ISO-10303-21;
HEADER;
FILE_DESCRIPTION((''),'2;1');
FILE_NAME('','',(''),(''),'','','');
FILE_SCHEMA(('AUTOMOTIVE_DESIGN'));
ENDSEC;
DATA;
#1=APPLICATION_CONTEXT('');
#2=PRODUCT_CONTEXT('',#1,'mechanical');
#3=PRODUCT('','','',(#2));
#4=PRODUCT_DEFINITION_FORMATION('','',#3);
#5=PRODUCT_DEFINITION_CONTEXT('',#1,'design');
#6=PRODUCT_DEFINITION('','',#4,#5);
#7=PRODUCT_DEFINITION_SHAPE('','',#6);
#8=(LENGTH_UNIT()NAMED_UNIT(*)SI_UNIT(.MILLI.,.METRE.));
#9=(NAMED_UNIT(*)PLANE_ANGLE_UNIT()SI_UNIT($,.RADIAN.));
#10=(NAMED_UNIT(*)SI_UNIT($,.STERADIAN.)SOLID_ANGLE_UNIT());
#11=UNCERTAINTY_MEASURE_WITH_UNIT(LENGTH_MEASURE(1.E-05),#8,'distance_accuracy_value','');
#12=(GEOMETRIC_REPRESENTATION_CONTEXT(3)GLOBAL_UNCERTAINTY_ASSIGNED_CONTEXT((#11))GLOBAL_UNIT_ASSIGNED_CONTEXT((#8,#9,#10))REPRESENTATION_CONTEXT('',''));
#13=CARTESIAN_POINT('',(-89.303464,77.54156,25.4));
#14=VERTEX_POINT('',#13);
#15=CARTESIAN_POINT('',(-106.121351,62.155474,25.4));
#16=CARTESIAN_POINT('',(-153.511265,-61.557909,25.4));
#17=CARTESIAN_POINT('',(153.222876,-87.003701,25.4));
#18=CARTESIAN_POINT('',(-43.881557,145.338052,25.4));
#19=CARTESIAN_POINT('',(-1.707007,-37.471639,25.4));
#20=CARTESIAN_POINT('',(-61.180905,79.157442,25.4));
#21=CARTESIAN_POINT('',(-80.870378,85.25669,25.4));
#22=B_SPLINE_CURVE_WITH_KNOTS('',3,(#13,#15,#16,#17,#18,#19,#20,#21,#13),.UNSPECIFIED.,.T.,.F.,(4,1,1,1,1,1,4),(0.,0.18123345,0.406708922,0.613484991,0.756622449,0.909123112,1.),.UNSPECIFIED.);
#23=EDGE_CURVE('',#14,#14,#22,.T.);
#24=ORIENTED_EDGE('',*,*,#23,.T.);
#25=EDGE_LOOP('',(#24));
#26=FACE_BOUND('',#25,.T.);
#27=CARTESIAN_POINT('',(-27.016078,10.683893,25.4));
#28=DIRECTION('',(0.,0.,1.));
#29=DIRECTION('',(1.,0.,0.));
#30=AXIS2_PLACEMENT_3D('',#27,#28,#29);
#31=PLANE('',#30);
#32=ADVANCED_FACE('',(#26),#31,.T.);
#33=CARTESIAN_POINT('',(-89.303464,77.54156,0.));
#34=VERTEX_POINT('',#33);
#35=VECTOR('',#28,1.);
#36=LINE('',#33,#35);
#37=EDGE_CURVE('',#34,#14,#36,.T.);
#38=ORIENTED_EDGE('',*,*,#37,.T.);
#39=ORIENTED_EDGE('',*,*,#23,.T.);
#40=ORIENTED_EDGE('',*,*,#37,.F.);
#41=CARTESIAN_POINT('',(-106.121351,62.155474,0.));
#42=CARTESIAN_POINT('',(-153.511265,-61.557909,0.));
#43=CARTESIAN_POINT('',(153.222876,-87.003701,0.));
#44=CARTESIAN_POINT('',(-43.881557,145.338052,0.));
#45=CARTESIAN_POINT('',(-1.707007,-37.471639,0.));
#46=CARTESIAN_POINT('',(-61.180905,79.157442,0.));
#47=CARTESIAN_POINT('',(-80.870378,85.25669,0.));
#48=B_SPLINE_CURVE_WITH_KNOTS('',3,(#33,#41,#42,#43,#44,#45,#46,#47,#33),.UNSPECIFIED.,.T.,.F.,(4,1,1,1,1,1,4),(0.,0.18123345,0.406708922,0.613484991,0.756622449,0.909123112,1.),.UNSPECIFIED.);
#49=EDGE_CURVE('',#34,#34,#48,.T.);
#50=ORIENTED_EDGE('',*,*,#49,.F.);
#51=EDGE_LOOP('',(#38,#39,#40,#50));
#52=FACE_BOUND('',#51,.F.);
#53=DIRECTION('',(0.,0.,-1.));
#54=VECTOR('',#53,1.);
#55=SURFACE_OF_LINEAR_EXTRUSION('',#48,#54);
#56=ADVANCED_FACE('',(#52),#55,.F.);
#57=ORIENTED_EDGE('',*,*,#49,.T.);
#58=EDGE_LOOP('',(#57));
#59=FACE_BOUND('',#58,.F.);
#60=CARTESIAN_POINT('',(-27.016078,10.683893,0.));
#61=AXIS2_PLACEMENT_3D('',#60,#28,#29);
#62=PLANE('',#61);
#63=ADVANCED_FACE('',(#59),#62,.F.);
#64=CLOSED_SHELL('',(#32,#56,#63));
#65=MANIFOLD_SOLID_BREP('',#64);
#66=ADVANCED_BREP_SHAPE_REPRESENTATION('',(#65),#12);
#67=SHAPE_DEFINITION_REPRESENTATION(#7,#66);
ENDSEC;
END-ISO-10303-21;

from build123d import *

# Parameters (mm, degrees)
F1_DEPTH = 25.4


# Not quite as in the source:
# - the program builds the solid bodies; features that only make, move or delete a surface that nothing else refers to are left out


with BuildPart() as f1:
    # F0 (on Top) → F1 (new body)
    with BuildSketch(Plane.XY):
        with BuildLine():
            add(Edge.make_bspline(
                [(-89.3034636974, 77.5415599346), (-106.1213513806, 62.1554739644), (-153.5112654022, -61.5579093212), (153.2228761671, -87.0037013585), (-43.8815566445, 145.3380521797), (-1.7070066843, -37.4716393849), (-61.1809052267, 79.1574417961), (-80.8703775867, 85.2566898212), (-89.3034636974, 77.5415599346)],
                knots=[0, 0, 0, 0, 0.1812334503, 0.406708922, 0.6134849908, 0.7566224491, 0.9091231122, 1, 1, 1, 1], degree=3))
        make_face()
    extrude(amount=F1_DEPTH)


solid = f1.part
